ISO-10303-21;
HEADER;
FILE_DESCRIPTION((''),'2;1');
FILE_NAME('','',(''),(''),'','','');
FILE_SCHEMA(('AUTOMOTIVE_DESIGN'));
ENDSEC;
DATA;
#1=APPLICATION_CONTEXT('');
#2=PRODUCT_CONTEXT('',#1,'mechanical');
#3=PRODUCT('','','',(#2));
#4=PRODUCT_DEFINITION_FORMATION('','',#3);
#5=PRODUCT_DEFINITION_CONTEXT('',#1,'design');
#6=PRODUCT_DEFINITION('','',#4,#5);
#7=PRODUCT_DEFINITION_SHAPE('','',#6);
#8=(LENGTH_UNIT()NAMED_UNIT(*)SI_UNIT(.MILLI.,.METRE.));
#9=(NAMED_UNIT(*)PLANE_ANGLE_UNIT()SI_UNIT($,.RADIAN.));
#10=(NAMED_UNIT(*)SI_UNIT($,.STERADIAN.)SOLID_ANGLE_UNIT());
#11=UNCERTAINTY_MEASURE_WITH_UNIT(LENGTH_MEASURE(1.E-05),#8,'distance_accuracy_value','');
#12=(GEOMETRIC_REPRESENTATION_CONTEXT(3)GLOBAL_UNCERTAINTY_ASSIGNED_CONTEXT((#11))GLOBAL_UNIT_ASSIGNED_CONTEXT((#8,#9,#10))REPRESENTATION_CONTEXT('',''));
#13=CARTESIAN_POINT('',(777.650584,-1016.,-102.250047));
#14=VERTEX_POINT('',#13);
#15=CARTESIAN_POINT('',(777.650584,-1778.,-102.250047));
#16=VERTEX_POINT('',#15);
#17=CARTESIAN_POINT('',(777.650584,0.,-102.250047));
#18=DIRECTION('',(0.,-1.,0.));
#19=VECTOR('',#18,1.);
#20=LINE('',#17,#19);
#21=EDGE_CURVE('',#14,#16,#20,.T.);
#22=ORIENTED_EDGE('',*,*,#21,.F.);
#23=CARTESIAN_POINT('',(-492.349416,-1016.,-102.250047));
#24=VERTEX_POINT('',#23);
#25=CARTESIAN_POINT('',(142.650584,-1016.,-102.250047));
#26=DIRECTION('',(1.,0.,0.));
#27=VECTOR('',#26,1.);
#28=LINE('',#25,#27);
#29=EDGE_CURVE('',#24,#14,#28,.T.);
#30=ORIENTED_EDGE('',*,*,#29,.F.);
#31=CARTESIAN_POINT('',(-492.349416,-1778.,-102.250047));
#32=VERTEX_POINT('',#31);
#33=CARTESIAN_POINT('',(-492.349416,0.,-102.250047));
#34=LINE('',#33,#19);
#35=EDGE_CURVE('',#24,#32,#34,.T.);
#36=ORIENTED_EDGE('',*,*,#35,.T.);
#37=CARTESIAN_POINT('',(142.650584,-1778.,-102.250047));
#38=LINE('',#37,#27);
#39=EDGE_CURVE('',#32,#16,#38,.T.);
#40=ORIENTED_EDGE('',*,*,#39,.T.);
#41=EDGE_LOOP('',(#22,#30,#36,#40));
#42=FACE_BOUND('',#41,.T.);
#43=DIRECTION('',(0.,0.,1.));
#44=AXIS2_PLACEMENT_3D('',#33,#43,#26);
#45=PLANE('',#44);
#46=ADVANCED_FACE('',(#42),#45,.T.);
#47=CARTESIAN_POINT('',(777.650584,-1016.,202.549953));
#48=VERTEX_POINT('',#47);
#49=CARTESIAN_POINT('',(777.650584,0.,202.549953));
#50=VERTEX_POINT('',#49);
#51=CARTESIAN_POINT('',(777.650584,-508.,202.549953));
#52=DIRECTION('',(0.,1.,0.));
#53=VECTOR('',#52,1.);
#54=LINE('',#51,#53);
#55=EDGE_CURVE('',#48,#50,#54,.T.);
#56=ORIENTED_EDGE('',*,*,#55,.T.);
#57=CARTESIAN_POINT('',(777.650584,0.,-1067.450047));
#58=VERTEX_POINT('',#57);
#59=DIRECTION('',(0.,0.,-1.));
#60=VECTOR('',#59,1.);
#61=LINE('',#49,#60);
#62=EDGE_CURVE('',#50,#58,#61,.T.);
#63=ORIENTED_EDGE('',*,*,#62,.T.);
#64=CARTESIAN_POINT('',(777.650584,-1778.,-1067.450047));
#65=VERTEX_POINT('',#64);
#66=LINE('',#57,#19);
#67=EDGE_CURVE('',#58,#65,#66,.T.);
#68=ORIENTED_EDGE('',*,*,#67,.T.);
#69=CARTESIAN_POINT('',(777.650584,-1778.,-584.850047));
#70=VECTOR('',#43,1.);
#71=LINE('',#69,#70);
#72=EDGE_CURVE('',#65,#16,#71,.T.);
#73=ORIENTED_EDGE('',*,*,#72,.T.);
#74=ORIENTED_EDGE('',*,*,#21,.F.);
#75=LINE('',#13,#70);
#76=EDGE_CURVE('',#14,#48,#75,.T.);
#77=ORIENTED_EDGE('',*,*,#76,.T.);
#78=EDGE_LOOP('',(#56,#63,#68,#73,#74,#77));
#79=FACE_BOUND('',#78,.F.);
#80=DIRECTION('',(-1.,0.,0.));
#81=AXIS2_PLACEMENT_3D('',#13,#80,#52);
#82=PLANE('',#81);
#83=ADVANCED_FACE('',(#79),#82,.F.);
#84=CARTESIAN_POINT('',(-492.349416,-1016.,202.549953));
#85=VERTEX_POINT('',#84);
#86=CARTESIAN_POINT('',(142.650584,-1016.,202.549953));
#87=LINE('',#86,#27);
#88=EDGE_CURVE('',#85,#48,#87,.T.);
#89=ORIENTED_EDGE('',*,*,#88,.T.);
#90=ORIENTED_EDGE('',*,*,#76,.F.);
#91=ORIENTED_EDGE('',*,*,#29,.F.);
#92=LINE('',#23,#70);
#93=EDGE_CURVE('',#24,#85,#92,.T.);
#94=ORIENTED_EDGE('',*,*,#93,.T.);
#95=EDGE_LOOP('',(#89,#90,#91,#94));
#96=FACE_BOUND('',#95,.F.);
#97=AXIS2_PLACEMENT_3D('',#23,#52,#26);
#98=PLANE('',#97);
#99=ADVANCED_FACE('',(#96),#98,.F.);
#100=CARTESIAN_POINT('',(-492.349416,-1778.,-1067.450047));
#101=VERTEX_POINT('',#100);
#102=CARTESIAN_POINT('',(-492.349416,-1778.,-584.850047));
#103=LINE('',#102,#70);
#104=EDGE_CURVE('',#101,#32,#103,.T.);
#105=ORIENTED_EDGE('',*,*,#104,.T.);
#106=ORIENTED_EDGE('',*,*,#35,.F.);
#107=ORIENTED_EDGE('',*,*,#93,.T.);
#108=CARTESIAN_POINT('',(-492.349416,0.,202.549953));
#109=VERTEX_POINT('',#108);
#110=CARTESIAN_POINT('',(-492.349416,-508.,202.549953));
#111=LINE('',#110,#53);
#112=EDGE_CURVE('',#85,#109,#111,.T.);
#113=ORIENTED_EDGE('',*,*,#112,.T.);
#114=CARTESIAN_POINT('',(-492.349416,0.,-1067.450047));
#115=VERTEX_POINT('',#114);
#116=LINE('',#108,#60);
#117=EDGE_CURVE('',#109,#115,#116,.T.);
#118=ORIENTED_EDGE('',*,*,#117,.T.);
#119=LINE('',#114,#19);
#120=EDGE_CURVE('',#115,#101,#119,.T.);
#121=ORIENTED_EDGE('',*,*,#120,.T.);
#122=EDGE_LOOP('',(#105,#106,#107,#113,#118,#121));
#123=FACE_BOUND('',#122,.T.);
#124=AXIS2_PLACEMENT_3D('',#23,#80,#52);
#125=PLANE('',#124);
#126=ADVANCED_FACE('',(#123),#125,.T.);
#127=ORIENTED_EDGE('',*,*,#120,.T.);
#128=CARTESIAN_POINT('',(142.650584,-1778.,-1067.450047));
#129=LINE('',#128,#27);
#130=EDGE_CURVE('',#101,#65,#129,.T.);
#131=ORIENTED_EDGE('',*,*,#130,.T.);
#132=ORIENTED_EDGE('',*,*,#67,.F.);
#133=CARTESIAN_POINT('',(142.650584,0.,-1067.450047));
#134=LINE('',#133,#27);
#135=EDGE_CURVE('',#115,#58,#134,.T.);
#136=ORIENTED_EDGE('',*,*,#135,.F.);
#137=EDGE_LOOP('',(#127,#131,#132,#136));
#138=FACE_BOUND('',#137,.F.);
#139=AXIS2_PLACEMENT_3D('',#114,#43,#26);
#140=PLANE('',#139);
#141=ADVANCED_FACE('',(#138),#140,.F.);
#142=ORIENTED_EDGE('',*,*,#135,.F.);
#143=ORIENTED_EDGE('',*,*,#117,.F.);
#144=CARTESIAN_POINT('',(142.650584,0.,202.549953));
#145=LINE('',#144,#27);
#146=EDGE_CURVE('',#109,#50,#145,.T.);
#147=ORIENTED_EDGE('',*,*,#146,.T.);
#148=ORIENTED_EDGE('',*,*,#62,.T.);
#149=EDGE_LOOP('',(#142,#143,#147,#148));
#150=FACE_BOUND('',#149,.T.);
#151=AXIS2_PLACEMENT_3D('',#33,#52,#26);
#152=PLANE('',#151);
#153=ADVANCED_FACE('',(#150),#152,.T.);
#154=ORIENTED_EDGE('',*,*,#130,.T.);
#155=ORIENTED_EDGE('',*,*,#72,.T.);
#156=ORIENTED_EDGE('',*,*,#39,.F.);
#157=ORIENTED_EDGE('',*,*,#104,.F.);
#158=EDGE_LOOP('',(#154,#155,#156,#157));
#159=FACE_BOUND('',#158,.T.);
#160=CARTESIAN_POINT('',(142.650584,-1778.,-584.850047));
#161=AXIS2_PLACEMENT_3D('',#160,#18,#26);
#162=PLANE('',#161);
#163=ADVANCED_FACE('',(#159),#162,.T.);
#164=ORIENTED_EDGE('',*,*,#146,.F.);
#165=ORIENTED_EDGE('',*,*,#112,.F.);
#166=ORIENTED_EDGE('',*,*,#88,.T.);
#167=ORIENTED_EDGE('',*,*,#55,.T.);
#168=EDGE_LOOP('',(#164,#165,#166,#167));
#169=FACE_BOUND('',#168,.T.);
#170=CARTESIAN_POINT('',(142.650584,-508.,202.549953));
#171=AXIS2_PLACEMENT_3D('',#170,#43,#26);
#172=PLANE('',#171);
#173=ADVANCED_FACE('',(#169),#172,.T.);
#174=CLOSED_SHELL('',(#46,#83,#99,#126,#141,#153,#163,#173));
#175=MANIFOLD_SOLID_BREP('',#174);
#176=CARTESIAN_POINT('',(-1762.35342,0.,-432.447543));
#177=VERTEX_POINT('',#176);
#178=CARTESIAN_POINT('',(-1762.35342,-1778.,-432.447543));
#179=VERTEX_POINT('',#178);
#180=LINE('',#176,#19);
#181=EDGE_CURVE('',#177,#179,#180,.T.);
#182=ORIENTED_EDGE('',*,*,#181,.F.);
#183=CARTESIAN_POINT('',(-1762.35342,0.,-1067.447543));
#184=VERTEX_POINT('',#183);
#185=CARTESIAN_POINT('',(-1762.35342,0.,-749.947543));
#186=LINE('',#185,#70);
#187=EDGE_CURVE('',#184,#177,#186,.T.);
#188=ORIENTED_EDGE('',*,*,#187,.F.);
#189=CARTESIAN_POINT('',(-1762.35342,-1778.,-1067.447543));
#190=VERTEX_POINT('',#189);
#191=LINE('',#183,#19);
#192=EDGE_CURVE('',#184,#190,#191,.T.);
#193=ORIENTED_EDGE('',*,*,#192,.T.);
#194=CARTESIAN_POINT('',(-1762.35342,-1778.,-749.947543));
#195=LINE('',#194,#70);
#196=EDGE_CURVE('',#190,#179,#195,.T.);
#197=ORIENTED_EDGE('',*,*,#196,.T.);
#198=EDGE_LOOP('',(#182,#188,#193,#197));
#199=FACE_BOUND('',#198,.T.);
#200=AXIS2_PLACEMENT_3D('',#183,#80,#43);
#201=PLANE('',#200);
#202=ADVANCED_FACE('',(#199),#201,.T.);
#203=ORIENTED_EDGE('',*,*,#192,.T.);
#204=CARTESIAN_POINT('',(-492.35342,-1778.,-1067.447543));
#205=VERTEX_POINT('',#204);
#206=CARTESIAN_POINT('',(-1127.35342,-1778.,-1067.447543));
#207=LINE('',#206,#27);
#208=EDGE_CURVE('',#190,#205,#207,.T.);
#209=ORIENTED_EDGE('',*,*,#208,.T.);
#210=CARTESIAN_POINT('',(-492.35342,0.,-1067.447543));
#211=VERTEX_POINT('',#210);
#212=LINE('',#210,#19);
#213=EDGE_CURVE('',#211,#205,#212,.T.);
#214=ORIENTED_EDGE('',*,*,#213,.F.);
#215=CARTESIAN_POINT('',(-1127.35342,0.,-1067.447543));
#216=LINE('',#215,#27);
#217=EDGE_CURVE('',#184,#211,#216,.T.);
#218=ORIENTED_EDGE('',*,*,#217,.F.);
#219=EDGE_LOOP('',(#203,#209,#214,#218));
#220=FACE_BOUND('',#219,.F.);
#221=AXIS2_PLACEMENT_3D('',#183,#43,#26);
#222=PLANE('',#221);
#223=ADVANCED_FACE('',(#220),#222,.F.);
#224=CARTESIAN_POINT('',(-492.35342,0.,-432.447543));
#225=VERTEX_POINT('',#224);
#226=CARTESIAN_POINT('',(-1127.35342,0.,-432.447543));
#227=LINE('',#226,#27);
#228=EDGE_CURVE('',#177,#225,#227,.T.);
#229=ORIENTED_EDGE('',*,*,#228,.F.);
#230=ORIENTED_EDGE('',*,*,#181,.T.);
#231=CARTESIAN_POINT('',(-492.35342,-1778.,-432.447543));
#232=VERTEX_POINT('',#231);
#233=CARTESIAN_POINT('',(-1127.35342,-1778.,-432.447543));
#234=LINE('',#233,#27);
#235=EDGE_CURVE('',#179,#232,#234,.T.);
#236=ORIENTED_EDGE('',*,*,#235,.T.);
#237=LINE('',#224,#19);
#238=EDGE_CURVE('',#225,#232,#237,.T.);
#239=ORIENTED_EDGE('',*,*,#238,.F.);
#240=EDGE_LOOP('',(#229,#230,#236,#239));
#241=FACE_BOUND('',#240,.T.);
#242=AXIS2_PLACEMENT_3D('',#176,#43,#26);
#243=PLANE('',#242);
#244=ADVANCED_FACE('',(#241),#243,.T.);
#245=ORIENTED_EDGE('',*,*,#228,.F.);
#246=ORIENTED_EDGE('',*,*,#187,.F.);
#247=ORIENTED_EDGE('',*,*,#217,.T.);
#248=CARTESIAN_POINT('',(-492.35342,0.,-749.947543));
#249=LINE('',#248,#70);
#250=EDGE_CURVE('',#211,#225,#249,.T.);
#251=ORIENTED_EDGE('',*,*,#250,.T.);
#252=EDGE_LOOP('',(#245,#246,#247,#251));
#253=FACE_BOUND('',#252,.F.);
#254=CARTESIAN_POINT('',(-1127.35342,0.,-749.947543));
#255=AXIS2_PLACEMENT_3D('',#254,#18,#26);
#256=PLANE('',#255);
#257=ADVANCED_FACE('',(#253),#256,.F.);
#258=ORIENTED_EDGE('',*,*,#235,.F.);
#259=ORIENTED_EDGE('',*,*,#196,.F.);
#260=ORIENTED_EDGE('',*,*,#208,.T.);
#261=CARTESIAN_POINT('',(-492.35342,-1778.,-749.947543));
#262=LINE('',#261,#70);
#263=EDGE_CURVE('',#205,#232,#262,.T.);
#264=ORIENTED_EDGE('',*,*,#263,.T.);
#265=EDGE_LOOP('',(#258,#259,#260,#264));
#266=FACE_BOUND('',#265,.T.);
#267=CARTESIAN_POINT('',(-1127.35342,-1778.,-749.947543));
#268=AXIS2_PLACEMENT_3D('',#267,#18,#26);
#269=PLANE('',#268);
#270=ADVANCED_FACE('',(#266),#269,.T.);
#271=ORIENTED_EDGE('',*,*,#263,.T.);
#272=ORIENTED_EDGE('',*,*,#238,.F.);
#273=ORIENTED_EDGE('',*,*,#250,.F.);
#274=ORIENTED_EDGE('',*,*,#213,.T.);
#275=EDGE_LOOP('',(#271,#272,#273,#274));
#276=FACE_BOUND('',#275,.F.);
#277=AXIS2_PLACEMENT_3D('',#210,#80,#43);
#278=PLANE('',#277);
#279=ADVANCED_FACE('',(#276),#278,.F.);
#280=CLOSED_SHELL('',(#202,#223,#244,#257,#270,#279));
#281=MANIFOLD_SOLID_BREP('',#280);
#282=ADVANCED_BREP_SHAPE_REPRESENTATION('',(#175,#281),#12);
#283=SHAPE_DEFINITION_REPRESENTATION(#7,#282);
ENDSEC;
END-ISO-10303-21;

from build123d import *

# Parameters (mm, degrees)
F1_W     = 1270
F1_H     = 965.2
F2_DEPTH = 1778
F0_W     = 1270
F0_H     = 635
F3_DEPTH = 1778
F6_W     = 1270
F6_H     = 1016
F7_DEPTH = 304.8


# Not quite as in the source:
# - a feature of the source that left no trace in its solid (it failed there, or was rolled back) is left out


with BuildPart() as f2:
    # F1 (on Front) → F2 (new body)
    with BuildSketch(Plane.XZ):
        with Locations((142.6505839825, -584.8500465393)):
            Rectangle(F1_W, F1_H)
    extrude(amount=F2_DEPTH)

    # F6 (on face) → F7 (join)
    with BuildSketch(Plane.XY.offset(-102.2500465393)):
        with Locations((142.6505839825, -508)):
            Rectangle(F6_W, F6_H)
    extrude(amount=F7_DEPTH)


with BuildPart() as f3:
    # F0 (on Front) → F3 (new body)
    with BuildSketch(Plane.XZ):
        with Locations((-1127.3534202576, -749.9475431442)):
            Rectangle(F0_W, F0_H)
    extrude(amount=F3_DEPTH)


solid = Compound([f2.part, f3.part])
